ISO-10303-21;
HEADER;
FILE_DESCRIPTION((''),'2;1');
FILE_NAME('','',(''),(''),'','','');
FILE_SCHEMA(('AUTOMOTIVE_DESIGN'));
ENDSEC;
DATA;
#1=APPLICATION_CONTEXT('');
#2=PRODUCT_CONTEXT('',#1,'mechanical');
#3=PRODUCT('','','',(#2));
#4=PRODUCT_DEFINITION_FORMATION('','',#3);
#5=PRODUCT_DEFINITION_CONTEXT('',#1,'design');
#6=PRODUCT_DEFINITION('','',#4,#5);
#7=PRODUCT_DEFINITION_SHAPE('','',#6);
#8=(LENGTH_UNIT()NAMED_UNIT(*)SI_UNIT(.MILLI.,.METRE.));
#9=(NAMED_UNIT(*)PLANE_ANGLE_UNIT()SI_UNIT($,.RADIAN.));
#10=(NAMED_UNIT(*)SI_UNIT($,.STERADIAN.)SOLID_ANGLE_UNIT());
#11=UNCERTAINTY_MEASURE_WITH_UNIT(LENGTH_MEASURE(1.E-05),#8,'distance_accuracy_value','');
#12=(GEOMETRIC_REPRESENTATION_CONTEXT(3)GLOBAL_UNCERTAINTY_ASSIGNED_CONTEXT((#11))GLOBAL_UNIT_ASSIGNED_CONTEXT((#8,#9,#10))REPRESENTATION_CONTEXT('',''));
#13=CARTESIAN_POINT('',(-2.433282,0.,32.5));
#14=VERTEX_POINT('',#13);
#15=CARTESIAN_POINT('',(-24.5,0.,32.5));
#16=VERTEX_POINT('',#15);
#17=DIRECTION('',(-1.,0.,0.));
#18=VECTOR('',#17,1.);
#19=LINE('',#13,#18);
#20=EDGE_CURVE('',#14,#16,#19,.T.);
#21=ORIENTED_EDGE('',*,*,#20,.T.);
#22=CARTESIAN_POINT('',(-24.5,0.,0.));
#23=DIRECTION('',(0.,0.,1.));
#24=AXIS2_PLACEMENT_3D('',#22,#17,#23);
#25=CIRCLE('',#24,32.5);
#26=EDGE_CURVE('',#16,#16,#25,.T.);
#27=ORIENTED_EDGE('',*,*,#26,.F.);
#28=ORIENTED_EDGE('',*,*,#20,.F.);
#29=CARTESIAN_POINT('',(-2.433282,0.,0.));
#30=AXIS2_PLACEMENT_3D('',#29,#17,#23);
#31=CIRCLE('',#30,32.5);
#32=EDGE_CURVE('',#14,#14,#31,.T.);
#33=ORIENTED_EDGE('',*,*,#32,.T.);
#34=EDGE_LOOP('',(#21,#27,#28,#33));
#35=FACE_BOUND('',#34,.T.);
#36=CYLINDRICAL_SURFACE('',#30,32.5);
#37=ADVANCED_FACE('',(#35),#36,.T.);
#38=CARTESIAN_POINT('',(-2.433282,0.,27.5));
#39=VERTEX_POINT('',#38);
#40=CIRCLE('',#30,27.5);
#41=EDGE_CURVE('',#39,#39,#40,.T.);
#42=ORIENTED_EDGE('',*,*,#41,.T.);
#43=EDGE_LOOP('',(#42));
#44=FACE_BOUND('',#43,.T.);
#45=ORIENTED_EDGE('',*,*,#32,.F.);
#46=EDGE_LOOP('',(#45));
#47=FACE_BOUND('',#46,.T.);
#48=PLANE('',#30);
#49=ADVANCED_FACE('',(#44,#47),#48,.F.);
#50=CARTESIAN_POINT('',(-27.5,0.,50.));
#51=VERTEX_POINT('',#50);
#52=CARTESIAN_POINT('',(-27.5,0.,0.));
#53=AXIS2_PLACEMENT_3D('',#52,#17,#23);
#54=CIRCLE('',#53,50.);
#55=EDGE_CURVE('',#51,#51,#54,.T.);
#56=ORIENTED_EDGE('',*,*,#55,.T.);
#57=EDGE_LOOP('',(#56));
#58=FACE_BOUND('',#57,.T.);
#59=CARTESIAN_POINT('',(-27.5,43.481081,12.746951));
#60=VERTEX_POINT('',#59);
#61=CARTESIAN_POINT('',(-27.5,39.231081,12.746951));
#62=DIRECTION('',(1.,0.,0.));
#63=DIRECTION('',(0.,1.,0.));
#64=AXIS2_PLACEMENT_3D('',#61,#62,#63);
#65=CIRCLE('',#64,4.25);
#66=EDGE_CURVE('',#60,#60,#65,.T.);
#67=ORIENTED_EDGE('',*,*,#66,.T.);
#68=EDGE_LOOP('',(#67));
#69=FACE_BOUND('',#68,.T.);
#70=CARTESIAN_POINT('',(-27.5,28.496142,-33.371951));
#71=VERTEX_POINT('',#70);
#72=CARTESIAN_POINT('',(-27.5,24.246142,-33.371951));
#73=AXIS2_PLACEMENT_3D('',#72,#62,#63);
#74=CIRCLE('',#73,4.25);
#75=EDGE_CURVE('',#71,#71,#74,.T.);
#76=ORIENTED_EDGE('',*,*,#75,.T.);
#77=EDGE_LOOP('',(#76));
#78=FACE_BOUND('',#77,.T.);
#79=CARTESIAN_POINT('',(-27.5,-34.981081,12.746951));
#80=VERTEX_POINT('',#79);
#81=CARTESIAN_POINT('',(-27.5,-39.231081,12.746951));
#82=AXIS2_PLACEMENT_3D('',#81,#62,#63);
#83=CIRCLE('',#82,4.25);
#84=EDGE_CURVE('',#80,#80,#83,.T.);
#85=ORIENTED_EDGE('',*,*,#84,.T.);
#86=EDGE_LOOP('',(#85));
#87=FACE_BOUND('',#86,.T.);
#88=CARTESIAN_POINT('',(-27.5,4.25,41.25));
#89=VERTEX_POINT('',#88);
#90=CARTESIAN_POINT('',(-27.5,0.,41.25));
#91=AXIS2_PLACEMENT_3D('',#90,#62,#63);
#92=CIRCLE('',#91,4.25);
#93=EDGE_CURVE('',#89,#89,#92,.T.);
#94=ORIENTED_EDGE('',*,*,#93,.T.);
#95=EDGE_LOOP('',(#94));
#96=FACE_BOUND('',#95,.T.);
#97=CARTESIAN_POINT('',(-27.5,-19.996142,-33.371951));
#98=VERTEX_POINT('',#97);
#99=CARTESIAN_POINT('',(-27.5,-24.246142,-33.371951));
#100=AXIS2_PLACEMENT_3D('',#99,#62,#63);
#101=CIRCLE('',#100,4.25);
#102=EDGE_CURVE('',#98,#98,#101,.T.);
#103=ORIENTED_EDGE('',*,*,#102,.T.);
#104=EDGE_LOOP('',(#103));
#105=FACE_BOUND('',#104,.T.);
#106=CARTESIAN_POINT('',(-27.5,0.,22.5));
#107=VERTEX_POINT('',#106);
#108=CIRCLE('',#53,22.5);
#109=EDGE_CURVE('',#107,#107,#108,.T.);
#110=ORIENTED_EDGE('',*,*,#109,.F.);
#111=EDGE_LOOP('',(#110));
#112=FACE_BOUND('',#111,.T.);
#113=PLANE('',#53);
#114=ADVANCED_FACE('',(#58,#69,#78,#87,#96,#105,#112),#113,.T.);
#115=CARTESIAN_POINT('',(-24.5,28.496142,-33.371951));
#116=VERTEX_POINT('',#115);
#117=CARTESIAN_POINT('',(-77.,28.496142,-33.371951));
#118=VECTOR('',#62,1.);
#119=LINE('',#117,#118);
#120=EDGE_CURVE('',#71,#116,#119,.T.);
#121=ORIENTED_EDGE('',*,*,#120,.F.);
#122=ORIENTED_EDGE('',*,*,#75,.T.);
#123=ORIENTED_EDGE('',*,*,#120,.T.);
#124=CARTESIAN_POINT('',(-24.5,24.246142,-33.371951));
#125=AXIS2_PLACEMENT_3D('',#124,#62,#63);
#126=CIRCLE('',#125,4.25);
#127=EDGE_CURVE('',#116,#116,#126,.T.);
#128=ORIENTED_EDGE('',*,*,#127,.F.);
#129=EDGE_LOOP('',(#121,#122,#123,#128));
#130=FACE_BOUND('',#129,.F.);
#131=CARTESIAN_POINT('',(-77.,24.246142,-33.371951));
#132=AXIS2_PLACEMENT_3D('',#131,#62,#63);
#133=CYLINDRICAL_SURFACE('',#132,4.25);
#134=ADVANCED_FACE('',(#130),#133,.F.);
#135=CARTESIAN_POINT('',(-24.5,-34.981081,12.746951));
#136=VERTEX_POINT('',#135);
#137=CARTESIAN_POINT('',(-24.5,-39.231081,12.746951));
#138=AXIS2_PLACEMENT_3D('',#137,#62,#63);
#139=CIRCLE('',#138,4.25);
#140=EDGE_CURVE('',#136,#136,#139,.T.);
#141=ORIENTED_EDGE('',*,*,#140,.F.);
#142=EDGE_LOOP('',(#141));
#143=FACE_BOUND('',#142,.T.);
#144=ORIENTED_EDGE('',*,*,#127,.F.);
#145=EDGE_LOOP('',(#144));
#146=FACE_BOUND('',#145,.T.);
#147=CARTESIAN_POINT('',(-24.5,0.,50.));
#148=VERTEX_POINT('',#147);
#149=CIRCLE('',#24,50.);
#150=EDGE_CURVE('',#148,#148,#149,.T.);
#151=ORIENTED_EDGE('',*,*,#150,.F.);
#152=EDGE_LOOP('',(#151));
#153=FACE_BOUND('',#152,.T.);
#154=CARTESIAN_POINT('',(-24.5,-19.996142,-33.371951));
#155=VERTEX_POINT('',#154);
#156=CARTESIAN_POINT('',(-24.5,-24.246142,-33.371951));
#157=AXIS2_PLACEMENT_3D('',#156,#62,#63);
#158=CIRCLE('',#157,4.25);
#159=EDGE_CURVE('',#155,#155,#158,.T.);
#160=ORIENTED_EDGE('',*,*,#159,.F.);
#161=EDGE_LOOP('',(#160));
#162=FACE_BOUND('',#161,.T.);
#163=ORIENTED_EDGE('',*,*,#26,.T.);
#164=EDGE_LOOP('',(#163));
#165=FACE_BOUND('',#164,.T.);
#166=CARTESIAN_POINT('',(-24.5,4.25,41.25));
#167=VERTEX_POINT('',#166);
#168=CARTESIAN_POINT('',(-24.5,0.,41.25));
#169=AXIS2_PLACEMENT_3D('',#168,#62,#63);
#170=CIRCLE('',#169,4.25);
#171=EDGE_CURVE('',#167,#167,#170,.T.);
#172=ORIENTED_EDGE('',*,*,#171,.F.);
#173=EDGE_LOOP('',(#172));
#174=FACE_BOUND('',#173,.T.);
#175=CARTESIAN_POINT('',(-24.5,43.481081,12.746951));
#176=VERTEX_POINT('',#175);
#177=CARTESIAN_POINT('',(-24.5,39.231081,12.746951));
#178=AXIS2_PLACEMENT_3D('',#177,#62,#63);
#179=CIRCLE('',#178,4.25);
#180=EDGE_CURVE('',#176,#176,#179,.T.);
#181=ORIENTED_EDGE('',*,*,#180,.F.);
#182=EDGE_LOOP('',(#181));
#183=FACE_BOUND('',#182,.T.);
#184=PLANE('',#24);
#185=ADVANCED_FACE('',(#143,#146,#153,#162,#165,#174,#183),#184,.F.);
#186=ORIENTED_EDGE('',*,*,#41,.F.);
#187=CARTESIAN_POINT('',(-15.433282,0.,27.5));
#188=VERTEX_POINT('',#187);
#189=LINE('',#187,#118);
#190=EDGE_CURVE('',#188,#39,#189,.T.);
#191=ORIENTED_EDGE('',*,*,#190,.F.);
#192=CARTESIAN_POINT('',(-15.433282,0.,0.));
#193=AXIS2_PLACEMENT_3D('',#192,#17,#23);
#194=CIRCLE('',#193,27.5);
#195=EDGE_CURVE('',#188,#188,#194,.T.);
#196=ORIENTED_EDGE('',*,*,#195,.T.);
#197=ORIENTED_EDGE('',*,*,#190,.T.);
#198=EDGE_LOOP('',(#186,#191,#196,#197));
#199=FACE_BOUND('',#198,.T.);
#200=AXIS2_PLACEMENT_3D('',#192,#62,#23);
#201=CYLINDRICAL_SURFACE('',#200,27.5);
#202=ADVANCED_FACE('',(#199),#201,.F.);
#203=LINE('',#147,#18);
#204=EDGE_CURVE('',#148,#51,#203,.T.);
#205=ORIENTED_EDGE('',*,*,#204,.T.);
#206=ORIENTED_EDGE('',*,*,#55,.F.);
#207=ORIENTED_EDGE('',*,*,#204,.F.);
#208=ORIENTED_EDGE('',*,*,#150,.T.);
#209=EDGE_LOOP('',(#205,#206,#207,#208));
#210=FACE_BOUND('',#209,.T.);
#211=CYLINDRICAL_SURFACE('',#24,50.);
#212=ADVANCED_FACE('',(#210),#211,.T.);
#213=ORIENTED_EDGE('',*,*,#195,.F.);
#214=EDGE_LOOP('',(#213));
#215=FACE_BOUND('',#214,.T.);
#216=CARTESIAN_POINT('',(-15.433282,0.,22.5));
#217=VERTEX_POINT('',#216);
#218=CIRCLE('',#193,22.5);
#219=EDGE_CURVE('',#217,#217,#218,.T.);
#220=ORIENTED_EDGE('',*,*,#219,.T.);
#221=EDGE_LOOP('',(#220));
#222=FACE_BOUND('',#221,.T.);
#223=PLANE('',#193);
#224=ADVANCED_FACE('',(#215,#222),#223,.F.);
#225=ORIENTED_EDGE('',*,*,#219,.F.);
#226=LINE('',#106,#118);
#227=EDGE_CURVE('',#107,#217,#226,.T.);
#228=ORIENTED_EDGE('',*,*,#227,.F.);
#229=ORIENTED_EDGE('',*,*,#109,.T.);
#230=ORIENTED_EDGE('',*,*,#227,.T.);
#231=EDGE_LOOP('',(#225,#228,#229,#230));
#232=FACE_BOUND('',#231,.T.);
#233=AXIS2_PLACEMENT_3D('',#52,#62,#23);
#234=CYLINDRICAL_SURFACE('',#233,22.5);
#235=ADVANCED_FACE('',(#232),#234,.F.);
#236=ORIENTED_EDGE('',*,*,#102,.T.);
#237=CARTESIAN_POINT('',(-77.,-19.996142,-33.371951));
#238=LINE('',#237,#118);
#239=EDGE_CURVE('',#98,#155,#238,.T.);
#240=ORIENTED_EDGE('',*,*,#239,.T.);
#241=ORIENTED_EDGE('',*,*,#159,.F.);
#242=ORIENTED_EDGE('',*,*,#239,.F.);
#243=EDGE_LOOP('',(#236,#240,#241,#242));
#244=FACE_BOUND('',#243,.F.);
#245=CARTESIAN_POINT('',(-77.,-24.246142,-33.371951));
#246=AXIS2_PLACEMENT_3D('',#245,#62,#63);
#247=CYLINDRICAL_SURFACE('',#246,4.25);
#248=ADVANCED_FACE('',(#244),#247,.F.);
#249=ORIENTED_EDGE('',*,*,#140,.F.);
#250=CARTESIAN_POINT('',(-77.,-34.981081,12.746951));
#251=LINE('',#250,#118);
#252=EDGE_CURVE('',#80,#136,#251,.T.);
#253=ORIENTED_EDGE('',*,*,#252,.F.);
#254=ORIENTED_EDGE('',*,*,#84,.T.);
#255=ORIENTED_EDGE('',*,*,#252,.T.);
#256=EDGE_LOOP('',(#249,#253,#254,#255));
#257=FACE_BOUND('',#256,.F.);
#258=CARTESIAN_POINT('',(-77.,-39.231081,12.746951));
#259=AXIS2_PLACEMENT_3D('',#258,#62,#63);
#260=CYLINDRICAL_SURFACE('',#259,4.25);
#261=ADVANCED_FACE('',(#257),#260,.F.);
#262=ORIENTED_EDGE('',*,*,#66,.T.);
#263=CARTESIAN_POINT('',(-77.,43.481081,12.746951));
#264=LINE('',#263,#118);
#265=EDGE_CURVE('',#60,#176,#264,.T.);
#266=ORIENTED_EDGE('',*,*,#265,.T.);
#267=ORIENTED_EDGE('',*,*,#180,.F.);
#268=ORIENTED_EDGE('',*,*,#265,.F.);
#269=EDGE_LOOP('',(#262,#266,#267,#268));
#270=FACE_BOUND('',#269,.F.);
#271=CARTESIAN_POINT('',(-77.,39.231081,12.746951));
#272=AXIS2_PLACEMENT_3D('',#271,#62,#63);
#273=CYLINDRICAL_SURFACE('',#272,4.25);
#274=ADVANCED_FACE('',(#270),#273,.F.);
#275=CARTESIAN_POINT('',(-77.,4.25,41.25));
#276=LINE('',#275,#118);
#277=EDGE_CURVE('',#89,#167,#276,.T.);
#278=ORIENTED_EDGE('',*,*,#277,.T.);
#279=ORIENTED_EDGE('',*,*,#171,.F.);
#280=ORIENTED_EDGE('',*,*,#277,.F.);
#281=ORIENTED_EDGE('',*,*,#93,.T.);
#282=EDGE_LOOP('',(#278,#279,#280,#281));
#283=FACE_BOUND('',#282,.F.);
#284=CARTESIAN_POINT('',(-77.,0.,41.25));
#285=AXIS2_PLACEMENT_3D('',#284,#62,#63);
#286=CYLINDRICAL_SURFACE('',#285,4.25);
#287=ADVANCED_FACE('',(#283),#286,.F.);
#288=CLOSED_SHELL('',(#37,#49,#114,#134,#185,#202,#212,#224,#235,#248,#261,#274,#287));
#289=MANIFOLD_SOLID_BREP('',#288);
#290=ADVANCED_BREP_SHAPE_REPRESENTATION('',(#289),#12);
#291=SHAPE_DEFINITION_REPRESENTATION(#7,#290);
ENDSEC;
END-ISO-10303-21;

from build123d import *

# Parameters (mm, degrees)
F3_D     = 8.5
F3_DEPTH = 49.5
F3_TIP   = 2.5536576309


# Not quite as in the source:
# - a feature names something its author has since deleted; it is built from what else it names


with BuildPart() as f1:
    # F0 (on Front) → F1 (revolve)
    with BuildSketch(Plane.XZ):
        Polygon((-15.4332816247, 27.5), (-2.4332816247, 27.5), (-2.4332816247, 32.5), (-24.5, 32.5), (-24.5, 50), (-27.5, 50), (-27.5, 22.5), (-15.4332816247, 22.5), align=None)
    revolve(axis=Axis((-62.9697144032, 0, 0), (-1, 0, 0)))

    # F3
    with Locations(Plane(origin=(-27.5, 0, 0), x_dir=(0, -1, 0), z_dir=(-1, 0, 0))):
        with Locations((0, 41.25), (39.2310812972, 12.746951018), (24.2461416571, -33.371951018), (-24.2461416571, -33.371951018), (-39.2310812972, 12.746951018)):
            Hole(F3_D / 2, depth=F3_DEPTH)
            with Locations((0, 0, -(F3_DEPTH + F3_TIP / 2))):  # 118° drill point
                Cone(0, F3_D / 2, F3_TIP, mode=Mode.SUBTRACT)


solid = f1.part
